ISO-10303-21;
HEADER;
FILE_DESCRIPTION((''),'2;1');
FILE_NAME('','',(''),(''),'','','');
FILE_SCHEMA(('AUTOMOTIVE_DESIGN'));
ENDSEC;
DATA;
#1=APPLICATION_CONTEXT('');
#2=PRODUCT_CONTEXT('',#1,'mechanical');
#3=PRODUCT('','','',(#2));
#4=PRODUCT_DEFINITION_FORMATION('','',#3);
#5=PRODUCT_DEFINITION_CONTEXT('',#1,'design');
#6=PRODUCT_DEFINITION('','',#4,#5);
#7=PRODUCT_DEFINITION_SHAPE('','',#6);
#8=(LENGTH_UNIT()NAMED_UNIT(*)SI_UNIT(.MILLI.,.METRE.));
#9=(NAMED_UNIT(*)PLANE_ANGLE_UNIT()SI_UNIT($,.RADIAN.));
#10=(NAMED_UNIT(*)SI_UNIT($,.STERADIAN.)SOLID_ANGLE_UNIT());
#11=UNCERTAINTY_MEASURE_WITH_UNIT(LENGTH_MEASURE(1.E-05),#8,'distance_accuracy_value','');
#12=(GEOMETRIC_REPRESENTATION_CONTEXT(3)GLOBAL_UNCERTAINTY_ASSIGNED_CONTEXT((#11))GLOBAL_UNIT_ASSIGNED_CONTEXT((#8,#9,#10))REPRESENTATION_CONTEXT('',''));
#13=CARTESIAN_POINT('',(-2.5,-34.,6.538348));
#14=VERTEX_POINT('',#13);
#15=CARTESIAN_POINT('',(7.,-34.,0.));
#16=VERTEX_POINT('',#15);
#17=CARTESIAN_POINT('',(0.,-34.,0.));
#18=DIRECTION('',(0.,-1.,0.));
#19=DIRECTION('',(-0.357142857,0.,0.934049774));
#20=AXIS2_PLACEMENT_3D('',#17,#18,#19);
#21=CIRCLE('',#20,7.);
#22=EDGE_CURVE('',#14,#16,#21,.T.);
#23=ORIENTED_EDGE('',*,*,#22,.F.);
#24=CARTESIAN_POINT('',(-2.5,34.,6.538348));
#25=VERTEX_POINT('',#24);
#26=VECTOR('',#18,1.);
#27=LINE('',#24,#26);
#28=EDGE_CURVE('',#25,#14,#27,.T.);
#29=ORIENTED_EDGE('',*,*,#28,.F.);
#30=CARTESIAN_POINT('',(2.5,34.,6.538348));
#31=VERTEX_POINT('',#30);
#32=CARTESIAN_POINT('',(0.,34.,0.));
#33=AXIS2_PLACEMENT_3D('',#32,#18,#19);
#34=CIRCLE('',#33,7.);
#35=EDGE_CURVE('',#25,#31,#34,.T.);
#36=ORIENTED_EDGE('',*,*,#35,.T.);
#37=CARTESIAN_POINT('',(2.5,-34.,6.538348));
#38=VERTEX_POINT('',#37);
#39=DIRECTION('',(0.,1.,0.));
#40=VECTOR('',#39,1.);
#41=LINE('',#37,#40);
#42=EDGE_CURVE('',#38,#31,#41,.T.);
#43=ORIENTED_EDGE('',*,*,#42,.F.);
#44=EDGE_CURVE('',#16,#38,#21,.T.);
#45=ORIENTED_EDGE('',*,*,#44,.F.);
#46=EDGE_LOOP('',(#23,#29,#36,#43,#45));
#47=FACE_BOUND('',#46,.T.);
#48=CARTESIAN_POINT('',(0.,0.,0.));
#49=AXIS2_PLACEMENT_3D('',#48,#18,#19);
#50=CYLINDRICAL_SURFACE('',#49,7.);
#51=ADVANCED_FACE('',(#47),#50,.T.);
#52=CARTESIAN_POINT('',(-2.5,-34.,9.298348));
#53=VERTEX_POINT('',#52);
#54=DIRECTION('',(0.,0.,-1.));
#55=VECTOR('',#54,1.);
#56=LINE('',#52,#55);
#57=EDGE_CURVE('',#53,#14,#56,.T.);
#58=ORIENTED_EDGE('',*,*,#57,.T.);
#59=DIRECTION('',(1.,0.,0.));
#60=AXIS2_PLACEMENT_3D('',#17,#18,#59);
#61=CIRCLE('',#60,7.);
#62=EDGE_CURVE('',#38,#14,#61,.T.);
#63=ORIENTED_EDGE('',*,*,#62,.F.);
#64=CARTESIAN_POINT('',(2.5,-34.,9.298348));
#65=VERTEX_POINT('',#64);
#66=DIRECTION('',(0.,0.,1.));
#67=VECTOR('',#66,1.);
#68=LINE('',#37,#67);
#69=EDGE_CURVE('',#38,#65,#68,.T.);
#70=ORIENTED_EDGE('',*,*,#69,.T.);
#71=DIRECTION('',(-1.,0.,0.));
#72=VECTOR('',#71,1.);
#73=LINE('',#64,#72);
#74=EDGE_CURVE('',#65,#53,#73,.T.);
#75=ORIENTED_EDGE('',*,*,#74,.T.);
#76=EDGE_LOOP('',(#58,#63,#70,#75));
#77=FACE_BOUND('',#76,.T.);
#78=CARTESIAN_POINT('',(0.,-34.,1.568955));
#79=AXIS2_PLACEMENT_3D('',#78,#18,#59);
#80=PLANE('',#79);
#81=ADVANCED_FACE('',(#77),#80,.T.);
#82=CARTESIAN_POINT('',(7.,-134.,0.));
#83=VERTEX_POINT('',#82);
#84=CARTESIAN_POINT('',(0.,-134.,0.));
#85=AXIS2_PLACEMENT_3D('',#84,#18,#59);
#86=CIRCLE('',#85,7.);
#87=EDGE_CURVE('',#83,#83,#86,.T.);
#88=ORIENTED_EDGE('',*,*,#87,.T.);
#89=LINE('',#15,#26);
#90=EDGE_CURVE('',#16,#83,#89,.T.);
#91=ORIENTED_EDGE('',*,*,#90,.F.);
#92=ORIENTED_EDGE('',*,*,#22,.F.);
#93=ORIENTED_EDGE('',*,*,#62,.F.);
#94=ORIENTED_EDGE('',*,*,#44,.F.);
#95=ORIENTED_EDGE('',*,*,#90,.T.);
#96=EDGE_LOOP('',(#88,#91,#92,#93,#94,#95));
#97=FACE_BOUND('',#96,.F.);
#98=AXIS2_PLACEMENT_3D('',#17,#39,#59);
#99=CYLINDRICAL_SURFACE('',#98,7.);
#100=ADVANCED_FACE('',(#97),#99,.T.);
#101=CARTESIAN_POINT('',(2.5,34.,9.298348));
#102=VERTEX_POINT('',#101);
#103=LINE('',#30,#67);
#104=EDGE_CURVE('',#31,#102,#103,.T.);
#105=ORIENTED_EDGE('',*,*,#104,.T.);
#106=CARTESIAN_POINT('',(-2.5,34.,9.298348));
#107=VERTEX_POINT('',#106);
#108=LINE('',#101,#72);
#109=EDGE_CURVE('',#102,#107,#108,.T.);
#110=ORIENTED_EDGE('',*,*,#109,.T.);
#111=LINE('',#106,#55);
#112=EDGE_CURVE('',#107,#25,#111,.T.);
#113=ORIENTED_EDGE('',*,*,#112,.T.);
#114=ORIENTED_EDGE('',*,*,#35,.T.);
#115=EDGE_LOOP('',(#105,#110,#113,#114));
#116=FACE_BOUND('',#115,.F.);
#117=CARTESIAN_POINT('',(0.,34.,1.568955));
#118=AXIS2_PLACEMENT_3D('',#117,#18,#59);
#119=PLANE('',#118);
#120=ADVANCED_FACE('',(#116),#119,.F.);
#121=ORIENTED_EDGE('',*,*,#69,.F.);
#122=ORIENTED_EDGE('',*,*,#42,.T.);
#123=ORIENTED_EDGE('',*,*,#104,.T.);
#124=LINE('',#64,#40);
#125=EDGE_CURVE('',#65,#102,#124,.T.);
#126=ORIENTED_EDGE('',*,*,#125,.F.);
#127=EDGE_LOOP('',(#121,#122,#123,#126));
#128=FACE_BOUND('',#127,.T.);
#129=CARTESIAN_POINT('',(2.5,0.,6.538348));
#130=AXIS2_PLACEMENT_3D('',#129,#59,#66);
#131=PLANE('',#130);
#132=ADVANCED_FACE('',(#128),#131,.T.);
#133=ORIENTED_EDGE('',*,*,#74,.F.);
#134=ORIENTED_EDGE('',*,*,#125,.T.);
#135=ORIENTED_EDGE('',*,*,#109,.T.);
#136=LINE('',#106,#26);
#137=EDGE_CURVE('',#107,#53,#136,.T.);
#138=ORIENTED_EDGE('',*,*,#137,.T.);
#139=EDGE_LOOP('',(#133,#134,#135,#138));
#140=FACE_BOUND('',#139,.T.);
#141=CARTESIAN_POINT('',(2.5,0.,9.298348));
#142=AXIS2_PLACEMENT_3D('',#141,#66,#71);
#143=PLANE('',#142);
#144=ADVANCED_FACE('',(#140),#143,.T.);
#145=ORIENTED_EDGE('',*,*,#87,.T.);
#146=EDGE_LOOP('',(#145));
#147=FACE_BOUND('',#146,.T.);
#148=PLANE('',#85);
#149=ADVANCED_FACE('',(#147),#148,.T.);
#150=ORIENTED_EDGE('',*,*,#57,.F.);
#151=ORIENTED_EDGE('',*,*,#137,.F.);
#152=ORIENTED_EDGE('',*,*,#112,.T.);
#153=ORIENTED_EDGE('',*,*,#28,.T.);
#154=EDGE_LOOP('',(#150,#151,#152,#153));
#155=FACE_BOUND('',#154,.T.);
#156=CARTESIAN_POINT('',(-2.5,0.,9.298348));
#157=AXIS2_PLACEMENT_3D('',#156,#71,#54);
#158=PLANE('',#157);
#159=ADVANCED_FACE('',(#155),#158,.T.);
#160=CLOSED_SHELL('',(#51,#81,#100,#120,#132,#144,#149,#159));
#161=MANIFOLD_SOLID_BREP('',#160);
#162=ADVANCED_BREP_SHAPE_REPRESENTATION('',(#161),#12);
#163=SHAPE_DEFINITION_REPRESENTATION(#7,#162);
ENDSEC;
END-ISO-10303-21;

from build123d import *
from build123d import SkipClean  # not in build123d's __all__

# Parameters (mm, degrees)
F1_DEPTH = 34
F2_R     = 7
F4_DEPTH = 100


with BuildPart() as f1:
    # F0 (on Front) → F1 (new body, symmetric)
    with BuildSketch(Plane.XZ):
        with BuildLine():
            Line((2.5, 9.2983484153), (-2.5, 9.2983484153))
            Line((-2.5, 9.2983484153), (-2.5, 6.5383484153))
            ThreePointArc((-2.5, 6.5383484153), (0, -7), (2.5, 6.5383484153))
            Line((2.5, 6.5383484153), (2.5, 9.2983484153))
        make_face()
    extrude(amount=F1_DEPTH, both=True)

    # F2 (on face) → F4 (join)
    with BuildSketch(Plane.XZ.offset(34)):
        Circle(F2_R)
    with SkipClean():  # cleaning this boolean's faces spoils the solid; the shape is the same uncleaned
        extrude(amount=F4_DEPTH)


solid = f1.part
